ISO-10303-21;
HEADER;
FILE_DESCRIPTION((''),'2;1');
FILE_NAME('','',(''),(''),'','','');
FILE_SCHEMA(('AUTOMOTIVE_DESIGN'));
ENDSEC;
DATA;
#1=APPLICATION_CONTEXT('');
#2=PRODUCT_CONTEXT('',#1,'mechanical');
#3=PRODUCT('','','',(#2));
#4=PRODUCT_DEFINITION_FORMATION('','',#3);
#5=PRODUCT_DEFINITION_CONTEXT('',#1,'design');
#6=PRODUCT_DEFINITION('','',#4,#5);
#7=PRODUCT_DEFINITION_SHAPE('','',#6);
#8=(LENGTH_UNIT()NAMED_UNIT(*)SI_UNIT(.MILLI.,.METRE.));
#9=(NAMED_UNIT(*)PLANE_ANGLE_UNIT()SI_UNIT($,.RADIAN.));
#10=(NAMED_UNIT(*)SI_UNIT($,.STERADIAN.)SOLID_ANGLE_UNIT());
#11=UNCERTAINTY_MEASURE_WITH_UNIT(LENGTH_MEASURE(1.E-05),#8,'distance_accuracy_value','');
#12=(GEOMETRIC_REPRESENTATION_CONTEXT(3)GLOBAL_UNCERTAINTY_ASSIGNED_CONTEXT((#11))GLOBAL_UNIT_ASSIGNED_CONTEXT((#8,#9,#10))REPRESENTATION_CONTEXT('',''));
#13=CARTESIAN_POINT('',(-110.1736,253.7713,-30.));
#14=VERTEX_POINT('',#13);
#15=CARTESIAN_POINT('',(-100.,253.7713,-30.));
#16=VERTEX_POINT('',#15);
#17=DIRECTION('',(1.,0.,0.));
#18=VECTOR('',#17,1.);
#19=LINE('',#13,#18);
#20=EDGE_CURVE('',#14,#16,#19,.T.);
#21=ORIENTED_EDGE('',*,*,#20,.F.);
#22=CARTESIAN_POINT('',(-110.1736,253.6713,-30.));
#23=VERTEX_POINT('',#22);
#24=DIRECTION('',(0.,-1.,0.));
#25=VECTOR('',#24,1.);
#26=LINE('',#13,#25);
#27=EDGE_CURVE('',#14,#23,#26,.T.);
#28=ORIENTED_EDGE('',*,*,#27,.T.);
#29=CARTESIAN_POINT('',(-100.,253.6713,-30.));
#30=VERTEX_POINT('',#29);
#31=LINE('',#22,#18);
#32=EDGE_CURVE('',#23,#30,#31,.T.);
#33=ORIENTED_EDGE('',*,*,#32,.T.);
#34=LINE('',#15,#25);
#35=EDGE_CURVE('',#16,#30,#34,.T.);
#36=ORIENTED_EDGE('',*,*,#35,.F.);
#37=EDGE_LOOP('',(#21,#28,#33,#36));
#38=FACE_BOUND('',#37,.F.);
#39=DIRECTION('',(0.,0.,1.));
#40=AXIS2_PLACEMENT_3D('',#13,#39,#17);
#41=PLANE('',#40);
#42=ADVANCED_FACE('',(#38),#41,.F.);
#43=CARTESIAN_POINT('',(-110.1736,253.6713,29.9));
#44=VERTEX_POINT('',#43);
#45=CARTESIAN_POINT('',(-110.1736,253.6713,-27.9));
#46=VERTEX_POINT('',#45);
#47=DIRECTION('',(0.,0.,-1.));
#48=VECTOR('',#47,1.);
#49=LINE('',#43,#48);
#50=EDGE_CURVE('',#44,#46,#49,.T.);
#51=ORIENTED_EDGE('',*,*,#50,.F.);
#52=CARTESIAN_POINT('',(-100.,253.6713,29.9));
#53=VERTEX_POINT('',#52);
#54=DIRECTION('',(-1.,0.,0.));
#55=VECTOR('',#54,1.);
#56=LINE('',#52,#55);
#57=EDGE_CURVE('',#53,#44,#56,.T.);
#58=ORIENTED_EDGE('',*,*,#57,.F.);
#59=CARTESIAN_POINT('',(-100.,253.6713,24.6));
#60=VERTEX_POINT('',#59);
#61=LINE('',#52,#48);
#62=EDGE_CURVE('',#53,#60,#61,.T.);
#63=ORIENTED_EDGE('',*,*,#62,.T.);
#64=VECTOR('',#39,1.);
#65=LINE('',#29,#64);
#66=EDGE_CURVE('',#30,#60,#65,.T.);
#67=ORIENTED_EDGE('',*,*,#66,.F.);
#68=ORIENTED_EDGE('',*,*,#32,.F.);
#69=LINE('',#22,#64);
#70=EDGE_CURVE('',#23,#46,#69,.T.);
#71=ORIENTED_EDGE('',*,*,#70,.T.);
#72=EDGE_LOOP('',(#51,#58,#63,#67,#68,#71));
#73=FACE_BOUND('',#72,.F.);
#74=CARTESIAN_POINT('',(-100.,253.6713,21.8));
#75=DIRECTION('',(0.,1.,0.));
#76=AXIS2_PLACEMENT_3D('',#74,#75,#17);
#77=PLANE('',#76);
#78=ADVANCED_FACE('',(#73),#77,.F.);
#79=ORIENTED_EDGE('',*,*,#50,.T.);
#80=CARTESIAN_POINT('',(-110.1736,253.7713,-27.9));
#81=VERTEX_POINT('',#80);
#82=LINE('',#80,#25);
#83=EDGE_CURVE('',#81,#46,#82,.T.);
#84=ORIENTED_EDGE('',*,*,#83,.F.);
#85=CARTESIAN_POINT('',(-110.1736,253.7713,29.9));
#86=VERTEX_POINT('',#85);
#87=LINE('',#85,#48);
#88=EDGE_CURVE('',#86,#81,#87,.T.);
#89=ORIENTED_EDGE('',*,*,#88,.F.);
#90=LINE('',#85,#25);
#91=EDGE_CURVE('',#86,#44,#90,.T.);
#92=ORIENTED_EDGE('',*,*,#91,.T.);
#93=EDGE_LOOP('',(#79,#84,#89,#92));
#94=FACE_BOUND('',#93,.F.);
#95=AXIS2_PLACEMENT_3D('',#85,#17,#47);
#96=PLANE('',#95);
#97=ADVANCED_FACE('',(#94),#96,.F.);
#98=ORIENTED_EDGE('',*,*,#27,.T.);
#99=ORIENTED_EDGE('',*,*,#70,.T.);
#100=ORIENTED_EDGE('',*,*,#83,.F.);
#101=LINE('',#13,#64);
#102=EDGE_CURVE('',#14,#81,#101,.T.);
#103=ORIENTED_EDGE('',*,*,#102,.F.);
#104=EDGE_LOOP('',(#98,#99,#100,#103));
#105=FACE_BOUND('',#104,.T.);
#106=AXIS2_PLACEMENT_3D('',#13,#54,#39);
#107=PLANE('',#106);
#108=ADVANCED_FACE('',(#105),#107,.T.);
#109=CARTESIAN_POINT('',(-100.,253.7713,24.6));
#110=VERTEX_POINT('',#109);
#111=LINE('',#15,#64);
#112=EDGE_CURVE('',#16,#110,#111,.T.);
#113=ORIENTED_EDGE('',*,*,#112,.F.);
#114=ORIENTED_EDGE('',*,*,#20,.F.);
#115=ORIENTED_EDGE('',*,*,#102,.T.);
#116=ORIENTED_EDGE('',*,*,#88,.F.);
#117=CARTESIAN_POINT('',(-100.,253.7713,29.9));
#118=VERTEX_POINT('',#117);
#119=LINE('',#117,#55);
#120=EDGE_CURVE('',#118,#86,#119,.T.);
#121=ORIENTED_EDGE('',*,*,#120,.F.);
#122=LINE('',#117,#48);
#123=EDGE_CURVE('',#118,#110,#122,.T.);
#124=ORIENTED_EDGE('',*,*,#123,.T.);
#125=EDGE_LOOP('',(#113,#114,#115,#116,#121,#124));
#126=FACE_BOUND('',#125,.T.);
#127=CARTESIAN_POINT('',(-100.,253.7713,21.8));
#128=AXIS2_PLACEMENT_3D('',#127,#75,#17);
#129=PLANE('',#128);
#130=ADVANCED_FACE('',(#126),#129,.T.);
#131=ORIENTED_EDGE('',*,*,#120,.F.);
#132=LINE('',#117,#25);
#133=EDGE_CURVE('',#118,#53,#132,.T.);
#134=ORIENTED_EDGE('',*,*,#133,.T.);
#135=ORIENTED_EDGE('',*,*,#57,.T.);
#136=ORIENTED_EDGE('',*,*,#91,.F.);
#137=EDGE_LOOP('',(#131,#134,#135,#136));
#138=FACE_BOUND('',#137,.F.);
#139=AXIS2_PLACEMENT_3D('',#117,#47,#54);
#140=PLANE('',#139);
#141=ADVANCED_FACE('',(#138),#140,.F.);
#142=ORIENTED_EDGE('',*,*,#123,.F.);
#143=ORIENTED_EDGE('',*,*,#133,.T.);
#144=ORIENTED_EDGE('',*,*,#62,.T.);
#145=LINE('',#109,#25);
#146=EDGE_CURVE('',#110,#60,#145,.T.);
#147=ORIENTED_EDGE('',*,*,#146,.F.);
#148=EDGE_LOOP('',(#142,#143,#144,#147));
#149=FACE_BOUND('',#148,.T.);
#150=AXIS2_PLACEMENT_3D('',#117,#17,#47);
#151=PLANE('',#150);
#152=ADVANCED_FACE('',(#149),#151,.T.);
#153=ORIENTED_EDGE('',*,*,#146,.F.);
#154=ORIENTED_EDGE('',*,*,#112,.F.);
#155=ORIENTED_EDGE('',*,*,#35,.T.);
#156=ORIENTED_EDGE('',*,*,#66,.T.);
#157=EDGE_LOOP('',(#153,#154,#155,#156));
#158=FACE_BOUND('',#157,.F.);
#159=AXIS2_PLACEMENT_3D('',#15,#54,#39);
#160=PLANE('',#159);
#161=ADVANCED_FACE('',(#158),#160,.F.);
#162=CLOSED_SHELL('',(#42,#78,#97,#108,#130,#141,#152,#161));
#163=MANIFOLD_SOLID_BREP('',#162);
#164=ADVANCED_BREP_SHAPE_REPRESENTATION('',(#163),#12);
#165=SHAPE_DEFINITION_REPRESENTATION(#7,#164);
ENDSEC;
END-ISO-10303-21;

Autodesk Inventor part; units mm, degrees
ref_plane "YZ Plane" through (0, 0, 0) normal (1, 0, 0) x (0, 1, 0)
ref_plane "XZ Plane" through (0, 0, 0) normal (0, 1, 0) x (-1, 0, 0)
ref_plane "XY Plane" through (0, 0, 0) normal (0, 0, 1) x (1, 0, 0)
surface "Composite1"
sketch "Sketch1" plane through (-100, 253.7713, 21.8) normal (0, 1, 0) x (1, 0, 0)
  line L0 (-10.1736, 51.8) -> (-10.1736, 49.7) projected
  line L1 (0, -8.1) -> (0, -2.8) projected
  line L2 (-10.1736, 51.8) -> (0, 51.8)
  line L3 (0, 51.8) -> (0, -8.1)
  line L4 (0, -8.1) -> (-10.1736, -8.1)
  line L5 (-10.1736, -8.1) -> (-10.1736, 51.8)
  point P0 (100, 21.8)
extrude "Extrusion1" add sketch "Sketch1" against normal blind 0.1
properties part number "Surface 5" material "PC/ABS Plastic"
